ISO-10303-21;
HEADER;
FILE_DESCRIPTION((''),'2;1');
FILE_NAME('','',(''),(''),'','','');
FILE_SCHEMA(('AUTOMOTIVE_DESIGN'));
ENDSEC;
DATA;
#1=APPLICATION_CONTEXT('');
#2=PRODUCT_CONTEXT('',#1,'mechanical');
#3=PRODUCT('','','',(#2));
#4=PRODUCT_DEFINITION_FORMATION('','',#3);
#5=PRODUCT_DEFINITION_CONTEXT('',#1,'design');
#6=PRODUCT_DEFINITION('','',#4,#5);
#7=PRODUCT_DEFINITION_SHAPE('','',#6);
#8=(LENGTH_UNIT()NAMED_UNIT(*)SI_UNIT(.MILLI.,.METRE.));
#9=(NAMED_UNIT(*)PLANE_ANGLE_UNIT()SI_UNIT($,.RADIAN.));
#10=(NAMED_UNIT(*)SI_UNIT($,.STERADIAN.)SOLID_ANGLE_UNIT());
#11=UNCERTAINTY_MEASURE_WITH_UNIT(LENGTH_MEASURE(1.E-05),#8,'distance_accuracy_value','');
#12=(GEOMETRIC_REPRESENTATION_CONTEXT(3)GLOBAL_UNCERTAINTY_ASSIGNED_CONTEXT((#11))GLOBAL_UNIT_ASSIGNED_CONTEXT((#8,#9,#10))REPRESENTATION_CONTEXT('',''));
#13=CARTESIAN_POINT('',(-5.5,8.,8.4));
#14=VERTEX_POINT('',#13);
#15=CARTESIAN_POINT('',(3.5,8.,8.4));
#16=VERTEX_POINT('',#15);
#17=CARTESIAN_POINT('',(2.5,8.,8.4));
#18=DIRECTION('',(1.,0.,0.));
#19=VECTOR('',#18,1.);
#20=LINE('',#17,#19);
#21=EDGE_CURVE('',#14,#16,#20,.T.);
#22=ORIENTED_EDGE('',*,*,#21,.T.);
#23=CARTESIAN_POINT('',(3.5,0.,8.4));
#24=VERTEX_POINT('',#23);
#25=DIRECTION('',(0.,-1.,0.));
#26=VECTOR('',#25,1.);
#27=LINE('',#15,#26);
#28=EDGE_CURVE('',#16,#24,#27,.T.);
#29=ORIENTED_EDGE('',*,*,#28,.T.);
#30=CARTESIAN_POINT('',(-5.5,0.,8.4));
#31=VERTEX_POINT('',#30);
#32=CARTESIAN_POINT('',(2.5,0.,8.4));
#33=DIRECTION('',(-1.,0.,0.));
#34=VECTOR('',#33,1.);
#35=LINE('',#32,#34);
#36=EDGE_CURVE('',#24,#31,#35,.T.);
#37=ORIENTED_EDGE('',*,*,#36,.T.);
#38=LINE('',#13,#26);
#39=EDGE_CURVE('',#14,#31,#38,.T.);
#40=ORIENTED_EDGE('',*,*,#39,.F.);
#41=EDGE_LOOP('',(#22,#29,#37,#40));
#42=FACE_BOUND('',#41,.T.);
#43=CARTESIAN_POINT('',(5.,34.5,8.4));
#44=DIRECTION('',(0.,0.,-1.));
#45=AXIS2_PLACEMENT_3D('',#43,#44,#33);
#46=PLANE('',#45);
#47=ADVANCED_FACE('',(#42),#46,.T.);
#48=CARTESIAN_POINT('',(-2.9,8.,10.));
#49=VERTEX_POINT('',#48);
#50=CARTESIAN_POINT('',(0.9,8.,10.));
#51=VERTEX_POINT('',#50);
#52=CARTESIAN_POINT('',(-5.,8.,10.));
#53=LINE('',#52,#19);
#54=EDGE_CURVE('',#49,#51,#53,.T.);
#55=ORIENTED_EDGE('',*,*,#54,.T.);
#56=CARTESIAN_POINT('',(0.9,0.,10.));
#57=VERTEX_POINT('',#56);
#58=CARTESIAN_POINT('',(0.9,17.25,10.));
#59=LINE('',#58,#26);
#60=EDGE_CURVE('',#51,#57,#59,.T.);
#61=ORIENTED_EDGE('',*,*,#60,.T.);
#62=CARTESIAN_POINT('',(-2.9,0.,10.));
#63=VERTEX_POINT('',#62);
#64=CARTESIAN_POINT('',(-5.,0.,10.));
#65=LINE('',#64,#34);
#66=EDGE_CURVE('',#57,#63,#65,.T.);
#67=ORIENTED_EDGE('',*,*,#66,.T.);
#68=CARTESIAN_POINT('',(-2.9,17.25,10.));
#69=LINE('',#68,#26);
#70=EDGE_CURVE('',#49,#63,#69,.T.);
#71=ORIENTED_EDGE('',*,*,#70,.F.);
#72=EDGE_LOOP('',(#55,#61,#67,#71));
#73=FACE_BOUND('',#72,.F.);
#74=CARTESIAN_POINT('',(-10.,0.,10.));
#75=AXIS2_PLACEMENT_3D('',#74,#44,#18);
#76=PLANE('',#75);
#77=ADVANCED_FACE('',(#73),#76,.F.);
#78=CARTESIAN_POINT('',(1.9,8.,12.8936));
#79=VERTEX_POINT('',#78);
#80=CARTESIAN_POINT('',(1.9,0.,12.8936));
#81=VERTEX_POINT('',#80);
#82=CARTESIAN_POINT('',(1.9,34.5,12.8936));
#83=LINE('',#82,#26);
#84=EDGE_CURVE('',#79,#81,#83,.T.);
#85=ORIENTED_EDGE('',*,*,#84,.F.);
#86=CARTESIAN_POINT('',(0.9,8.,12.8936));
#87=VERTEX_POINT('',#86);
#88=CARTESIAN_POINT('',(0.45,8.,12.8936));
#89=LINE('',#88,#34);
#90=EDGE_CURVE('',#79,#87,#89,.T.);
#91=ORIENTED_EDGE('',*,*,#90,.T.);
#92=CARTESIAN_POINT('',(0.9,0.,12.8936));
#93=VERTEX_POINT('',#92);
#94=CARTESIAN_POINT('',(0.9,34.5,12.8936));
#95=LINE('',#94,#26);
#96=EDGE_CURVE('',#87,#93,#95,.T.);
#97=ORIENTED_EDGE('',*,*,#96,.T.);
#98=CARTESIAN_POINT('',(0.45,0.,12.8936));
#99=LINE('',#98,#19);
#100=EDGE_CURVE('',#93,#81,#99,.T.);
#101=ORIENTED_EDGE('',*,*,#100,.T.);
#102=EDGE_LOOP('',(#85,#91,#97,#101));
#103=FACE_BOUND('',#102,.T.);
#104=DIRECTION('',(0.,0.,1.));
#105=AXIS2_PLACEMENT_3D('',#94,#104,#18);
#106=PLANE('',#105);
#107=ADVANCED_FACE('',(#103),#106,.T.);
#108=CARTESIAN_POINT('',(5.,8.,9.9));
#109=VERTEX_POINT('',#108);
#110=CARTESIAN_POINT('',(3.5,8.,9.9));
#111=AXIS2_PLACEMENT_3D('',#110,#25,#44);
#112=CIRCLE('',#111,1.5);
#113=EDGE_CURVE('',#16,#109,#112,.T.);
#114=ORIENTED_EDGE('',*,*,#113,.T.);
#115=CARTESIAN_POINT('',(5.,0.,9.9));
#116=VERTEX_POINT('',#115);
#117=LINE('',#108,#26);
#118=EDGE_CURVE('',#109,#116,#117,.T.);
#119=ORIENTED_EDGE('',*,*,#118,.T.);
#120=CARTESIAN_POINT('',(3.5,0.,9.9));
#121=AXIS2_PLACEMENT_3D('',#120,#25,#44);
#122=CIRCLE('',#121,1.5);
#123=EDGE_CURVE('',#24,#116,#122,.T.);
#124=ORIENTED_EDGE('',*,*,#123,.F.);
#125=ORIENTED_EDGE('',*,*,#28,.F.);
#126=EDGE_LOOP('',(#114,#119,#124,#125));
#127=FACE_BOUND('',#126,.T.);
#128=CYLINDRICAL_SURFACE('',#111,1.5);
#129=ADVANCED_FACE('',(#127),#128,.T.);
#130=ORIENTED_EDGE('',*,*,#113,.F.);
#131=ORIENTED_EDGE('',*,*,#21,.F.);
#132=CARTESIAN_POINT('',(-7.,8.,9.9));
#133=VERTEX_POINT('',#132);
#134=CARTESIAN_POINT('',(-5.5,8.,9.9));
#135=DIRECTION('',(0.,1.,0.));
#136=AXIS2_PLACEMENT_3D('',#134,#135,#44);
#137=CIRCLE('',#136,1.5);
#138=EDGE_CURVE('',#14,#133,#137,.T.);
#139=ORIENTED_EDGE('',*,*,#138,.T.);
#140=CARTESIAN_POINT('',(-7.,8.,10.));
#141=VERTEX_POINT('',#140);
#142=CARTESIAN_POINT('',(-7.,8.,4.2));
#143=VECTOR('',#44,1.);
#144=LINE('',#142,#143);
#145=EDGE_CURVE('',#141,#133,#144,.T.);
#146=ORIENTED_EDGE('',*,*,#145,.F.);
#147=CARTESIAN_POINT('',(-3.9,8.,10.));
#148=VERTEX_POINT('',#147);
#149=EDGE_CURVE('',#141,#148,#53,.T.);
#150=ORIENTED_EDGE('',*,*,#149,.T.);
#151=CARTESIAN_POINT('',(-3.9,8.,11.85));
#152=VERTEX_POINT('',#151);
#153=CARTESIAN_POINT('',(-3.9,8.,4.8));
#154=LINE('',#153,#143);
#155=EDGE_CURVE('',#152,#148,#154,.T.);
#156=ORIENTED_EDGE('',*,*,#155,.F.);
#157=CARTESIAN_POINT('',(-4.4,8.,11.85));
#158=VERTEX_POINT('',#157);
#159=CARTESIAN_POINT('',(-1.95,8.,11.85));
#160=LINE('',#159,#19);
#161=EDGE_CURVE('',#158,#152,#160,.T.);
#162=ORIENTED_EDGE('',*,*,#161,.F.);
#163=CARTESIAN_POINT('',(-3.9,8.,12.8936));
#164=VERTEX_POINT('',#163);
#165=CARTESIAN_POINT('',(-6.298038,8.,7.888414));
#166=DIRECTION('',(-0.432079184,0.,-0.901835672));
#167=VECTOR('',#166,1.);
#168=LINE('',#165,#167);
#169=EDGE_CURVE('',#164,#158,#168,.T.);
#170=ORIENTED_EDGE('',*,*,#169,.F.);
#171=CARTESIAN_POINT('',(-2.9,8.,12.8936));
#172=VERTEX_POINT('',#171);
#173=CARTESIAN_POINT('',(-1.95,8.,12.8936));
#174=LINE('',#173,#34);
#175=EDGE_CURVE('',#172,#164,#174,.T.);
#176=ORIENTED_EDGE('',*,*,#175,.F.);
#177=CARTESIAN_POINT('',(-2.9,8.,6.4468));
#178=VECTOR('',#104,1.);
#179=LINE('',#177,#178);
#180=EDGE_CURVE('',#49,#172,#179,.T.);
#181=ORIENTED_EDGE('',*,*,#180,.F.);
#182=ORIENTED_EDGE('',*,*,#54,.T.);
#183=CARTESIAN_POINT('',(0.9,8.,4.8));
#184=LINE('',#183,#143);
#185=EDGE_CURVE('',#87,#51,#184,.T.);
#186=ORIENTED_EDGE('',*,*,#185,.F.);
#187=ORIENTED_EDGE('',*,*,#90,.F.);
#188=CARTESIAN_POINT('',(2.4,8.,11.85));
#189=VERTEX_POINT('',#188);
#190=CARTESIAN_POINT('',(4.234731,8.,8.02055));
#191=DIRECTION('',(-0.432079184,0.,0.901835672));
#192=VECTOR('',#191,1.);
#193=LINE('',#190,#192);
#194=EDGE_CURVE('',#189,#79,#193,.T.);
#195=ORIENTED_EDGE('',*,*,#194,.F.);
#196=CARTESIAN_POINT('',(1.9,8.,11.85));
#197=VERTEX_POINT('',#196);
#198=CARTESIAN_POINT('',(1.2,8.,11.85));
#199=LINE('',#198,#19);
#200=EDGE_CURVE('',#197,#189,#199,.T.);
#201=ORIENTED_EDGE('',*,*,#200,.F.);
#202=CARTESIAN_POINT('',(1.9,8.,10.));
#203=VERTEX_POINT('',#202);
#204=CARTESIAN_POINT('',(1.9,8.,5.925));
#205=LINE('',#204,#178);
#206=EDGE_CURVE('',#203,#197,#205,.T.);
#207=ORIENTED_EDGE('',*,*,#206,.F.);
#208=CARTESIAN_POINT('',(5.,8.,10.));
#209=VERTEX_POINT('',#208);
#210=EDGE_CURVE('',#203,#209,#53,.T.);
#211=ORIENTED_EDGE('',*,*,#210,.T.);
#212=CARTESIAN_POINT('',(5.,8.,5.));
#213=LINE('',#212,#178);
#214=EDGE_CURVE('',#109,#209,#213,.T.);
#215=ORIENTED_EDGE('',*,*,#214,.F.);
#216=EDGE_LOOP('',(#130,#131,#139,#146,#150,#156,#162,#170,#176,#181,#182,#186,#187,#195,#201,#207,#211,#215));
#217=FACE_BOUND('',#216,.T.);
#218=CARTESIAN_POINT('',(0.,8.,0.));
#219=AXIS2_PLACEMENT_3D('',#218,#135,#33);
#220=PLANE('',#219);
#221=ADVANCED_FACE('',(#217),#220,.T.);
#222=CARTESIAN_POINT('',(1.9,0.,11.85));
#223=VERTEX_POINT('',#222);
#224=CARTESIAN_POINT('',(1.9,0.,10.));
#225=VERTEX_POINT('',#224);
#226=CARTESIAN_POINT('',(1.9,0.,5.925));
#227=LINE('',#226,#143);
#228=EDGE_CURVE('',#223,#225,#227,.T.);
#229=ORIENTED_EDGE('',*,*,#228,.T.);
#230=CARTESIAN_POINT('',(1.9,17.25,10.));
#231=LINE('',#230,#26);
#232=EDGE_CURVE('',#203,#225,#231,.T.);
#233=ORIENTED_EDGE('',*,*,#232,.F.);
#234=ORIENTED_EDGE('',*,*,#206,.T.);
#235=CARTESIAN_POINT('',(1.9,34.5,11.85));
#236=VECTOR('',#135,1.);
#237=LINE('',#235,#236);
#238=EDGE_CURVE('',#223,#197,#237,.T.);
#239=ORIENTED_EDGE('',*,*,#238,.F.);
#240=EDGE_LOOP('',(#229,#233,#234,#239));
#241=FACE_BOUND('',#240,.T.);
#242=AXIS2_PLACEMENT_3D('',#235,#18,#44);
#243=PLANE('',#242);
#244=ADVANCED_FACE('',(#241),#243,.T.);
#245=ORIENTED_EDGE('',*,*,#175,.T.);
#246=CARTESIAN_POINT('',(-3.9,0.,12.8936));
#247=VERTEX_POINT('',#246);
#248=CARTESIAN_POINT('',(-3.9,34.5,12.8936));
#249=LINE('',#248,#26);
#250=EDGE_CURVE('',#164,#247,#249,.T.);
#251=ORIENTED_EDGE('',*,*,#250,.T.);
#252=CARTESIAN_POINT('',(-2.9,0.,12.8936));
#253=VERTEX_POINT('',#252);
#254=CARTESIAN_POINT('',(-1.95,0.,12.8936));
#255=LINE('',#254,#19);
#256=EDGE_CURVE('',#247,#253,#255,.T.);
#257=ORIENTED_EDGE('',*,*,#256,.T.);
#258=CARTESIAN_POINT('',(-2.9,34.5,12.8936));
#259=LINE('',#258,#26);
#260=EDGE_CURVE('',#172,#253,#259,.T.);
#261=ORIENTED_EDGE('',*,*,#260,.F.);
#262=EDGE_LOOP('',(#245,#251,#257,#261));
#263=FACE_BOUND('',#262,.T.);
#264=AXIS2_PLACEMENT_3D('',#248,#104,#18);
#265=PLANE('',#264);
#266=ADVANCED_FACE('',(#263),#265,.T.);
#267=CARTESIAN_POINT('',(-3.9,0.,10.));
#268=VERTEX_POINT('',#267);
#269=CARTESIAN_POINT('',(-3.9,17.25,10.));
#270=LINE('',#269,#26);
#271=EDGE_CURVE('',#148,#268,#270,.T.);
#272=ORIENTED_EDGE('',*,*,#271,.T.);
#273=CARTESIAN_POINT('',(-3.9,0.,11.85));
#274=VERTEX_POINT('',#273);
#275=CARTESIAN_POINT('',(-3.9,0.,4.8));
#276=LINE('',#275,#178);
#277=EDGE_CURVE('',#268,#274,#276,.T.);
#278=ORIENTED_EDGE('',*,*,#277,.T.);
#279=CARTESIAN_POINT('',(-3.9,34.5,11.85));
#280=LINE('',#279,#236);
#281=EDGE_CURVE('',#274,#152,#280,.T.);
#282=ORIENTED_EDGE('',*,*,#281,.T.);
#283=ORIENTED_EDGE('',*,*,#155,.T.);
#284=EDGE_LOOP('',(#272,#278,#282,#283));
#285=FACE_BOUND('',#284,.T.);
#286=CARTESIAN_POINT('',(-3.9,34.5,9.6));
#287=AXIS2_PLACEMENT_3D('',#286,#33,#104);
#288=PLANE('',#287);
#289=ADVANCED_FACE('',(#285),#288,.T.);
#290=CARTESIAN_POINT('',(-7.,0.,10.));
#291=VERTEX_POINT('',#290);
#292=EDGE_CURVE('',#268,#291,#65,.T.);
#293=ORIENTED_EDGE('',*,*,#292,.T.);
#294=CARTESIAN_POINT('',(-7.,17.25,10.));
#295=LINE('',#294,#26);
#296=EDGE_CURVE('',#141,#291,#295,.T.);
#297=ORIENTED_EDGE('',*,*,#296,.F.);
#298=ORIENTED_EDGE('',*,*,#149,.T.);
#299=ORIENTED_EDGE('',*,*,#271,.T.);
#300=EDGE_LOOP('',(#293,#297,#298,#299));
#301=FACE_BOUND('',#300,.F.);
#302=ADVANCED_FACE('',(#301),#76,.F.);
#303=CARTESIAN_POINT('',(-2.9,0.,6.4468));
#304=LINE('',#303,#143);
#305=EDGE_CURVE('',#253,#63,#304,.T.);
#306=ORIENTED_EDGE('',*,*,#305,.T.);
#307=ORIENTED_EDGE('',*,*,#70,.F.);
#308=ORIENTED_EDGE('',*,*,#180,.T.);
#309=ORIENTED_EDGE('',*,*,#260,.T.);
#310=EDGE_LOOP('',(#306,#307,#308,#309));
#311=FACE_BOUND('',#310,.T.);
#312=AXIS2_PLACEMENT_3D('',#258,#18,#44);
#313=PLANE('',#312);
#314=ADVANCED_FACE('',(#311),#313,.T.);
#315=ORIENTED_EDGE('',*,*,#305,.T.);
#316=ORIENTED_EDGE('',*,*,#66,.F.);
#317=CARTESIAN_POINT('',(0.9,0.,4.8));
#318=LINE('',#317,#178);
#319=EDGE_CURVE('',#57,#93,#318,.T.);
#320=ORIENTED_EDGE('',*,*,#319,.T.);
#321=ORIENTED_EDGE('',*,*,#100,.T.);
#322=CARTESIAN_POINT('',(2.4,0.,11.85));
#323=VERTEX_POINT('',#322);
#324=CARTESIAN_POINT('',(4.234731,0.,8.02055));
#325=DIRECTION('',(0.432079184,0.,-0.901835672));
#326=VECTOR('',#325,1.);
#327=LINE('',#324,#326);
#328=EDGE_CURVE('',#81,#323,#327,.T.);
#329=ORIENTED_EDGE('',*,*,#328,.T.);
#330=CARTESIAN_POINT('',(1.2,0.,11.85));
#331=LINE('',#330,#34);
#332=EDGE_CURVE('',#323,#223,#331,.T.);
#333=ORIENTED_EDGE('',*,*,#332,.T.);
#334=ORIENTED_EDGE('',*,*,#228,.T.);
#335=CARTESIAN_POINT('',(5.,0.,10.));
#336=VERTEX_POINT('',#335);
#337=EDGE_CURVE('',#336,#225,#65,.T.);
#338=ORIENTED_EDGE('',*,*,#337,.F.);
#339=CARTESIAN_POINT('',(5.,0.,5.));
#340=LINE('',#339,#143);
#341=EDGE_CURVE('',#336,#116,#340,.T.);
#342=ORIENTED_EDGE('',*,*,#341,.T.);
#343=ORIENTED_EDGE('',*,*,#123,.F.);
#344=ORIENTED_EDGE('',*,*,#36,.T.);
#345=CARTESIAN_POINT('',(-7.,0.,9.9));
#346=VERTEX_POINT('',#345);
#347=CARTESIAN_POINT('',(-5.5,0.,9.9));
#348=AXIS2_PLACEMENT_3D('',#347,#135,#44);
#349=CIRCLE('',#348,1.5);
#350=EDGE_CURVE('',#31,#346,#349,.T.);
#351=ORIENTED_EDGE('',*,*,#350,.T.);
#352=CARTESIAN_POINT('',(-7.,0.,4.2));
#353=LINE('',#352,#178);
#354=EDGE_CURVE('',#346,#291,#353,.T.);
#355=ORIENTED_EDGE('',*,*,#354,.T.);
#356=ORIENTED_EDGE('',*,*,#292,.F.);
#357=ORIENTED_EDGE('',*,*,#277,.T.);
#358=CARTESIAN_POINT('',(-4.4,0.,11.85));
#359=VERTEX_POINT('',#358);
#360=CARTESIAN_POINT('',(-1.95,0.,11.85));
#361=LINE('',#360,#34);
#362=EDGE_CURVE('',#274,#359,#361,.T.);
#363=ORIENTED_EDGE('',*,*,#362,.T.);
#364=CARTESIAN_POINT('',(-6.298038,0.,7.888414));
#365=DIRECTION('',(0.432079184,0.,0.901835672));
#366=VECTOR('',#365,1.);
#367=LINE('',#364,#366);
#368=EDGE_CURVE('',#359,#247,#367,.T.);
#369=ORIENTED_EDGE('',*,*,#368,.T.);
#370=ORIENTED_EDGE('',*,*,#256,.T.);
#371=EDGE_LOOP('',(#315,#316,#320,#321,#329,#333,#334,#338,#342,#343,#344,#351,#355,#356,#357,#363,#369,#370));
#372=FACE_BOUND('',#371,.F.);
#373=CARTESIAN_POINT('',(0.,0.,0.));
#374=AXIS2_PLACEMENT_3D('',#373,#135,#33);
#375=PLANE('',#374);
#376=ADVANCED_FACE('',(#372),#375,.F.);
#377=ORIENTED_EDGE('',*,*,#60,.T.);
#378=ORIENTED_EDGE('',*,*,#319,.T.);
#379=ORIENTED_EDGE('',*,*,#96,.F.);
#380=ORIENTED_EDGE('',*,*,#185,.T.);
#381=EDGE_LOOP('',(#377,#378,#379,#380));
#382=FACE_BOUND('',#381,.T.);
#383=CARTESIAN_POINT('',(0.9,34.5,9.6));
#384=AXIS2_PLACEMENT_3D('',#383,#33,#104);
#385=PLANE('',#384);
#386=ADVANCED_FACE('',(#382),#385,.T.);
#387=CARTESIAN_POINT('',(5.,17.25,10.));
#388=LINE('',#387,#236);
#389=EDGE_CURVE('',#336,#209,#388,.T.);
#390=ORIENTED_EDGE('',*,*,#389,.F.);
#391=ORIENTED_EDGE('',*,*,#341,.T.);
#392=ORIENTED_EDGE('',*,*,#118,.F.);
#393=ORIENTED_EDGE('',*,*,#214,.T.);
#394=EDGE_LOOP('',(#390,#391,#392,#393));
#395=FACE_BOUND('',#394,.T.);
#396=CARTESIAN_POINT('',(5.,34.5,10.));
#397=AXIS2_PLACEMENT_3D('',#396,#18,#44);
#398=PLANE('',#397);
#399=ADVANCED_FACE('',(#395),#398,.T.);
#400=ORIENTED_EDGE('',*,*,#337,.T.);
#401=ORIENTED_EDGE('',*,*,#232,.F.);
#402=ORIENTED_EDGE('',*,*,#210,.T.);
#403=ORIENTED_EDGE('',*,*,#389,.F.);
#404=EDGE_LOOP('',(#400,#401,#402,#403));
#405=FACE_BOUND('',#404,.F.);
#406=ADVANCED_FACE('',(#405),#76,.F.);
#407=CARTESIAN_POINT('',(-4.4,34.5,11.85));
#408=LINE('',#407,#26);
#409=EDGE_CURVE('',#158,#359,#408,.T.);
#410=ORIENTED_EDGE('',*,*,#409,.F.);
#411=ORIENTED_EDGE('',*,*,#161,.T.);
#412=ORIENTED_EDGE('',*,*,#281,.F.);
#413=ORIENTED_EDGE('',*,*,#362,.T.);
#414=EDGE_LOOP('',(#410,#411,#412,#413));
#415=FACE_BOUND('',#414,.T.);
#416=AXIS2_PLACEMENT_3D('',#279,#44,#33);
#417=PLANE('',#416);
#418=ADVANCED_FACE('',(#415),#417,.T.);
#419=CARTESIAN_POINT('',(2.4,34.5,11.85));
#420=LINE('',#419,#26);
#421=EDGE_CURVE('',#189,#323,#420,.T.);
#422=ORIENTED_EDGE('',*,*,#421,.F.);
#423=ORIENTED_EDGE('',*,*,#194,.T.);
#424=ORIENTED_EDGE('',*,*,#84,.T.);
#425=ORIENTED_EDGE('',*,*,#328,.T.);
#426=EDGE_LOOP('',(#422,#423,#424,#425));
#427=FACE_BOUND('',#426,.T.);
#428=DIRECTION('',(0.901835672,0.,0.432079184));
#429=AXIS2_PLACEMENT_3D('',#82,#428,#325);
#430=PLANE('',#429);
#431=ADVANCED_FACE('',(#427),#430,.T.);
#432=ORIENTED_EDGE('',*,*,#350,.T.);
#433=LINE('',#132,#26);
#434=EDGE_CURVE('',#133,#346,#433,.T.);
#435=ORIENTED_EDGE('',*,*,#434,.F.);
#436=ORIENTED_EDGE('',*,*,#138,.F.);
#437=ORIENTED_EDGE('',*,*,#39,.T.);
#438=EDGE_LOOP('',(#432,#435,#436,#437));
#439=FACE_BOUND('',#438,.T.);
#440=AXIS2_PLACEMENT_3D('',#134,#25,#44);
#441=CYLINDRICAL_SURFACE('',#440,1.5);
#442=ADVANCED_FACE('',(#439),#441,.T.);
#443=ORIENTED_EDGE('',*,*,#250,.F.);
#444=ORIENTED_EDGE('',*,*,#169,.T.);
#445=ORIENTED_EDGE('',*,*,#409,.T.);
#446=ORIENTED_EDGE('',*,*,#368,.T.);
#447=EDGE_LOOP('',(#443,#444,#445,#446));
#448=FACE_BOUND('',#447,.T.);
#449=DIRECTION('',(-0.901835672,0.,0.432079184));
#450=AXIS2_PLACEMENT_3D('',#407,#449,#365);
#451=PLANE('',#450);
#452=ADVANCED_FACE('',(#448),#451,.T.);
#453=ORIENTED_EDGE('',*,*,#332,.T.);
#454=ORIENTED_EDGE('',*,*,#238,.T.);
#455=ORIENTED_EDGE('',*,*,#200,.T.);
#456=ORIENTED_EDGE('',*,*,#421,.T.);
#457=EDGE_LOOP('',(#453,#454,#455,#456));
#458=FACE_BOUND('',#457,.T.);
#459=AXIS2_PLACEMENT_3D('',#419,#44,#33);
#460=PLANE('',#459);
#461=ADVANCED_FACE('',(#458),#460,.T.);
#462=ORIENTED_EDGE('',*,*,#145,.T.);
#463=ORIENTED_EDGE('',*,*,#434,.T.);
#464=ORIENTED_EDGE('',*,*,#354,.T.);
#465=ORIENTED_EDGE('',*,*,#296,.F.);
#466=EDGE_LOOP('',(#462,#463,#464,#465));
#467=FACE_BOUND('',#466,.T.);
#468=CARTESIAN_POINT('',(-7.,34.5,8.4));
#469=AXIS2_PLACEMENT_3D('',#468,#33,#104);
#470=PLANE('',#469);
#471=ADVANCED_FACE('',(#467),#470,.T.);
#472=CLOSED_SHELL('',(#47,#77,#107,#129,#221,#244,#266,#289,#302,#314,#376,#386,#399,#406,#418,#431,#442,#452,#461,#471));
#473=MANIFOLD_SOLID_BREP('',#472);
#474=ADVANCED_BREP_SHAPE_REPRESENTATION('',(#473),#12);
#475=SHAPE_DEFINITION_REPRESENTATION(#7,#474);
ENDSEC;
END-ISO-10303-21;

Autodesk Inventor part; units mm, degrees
ref_plane "YZ Plane" through (0, 0, 0) normal (1, 0, 0) x (0, 1, 0)
ref_plane "XZ Plane" through (0, 0, 0) normal (0, 1, 0) x (-1, 0, 0)
ref_plane "XY Plane" through (0, 0, 0) normal (0, 0, 1) x (1, 0, 0)
sketch "Skizze1" plane through (0, 0, 0) normal (0, 1, 0) x (-1, 0, 0)
  line L0 (10, 10) -> (-10, 10)
  line L1 (-10, 10) -> (-10, -10)
  line L2 (-10, -10) -> (10, -10)
  line L3 (10, -10) -> (10, 10)
  line L4 (10, 10) -> (-10, -10) construction
  line L5 (-10, 10) -> (10, -10) construction
  point P0 (0, 0)
  dimension "d0" = 20
  dimension "d1" = 20
extrude "Extrusion1" add sketch "Skizze1" along normal blind 34.5
sketch "Skizze2" plane through (0, 0, 0) normal (0, -1, 0) x (1, 0, 0)
  line L0 (-8.9654, -8) -> (-1.6431, -8)
  line L1 (8, 1.6431) -> (8, 9.2)
  line L2 (-10, 10) -> (10, 10)
  line L3 (-10, -10) -> (-10, 10)
  line L4 (8, 10) -> (-10, 10)
  line L5 (-10, 10) -> (-10, -8)
  line L6 (-10, -8) -> (8, -8)
  line L7 (8, -8) -> (8, 10)
  line L8 (10, 10) -> (10, -10)
  line L9 (-10, 10) -> (10, 10)
  line L10 (-10, -10) -> (-10, 10)
  line L11 (10, -10) -> (-10, -10)
  circle A0 centre (-1.6431, 1.6431) radius 9.6431
  point P0 (0, 0)
extrude "Extrusion2" cut sketch "Skizze2" against normal through all contours L0 L6 L7 L1 L2 L8 L11 L3 | A0 L7 L6
sketch "Skizze3" plane through (0, 34.5, 0) normal (0, 1, 0) x (1, 0, 0)
  line L0 (0.9, -9.6) -> (0.9, -12.8936) projected
  line L1 (0.9, -12.8936) -> (1.9, -12.8936) projected
  line L2 (1.9, -12.8936) -> (2.4, -11.85) projected
  line L3 (2.4, -11.85) -> (1.9, -11.85) projected
  line L4 (1.9, -12.8936) -> (1.9, -9.6) projected
  line L5 (-2.9, -12.8936) -> (-2.9, -9.6) projected
  line L6 (-3.9, -9.6) -> (-3.9, -12.8936) projected
  line L7 (-3.9, -11.85) -> (-4.4, -11.85) projected
  line L8 (-4.4, -11.85) -> (-3.9, -12.8936) projected
  line L9 (-3.9, -12.8936) -> (-2.9, -12.8936) projected
  line L10 (0.9, -12.8936) -> (1.9, -12.8936)
  line L11 (1.9, -12.8936) -> (1.9, -9.6)
  line L12 (1.9, -9.6) -> (0.9, -9.6)
  line L13 (0.9, -9.6) -> (0.9, -12.8936)
  line L14 (-2.9, -12.8936) -> (-3.9, -12.8936)
  line L15 (-3.9, -12.8936) -> (-3.9, -9.6)
  line L16 (-3.9, -9.6) -> (-2.9, -9.6)
  line L17 (-2.9, -9.6) -> (-2.9, -12.8936)
  point P0 (0, 0)
extrude "Extrusion3" add sketch "Skizze3" against normal up to surface (34.5 mm away)
sketch "Skizze6" plane through (0, 34.5, 0) normal (0, 1, 0) x (1, 0, 0)
  line L0 (-7, -11.6) -> (5, -11.6)
  line L1 (5, -11.6) -> (5, -8.4)
  line L2 (5, -8.4) -> (-7, -8.4)
  line L3 (-7, -8.4) -> (-7, -11.6)
  line L4 (-2.9, -10) -> (0.9, -10) projected
  line L5 (-7, -11.6) -> (5, -8.4) construction
  line L6 (5, -11.6) -> (-7, -8.4) construction
  line L7 (-10, 8) -> (-10, -10) projected
  line L8 (-10, -10) -> (8, -10)
  line L9 (8, -10) -> (8, 8)
  line L10 (8, 8) -> (-10, 8)
  line L11 (-10, 8) -> (-10, -10)
  point P0 (0, 0)
  point P1 (-1, -10)
  point P2 (5, -10)
  point P3 (-7, -10)
  dimension "d26" = 12
  dimension "d27" = 3.2
extrude "Extrusion6" cut sketch "Skizze6" against normal through all both and the other way through all contours L8 L7 L10 L9 L1 L2 L3
move faces "Verschieben2" translate (0, -26.5, 0) faces at (-0.3667, 34.5, 8.9333)
fillet "Rundung5" radius 1.5 2 edges at (5, 4, 8.4) (-7, 4, 8.4)
properties part number "CableClip"
